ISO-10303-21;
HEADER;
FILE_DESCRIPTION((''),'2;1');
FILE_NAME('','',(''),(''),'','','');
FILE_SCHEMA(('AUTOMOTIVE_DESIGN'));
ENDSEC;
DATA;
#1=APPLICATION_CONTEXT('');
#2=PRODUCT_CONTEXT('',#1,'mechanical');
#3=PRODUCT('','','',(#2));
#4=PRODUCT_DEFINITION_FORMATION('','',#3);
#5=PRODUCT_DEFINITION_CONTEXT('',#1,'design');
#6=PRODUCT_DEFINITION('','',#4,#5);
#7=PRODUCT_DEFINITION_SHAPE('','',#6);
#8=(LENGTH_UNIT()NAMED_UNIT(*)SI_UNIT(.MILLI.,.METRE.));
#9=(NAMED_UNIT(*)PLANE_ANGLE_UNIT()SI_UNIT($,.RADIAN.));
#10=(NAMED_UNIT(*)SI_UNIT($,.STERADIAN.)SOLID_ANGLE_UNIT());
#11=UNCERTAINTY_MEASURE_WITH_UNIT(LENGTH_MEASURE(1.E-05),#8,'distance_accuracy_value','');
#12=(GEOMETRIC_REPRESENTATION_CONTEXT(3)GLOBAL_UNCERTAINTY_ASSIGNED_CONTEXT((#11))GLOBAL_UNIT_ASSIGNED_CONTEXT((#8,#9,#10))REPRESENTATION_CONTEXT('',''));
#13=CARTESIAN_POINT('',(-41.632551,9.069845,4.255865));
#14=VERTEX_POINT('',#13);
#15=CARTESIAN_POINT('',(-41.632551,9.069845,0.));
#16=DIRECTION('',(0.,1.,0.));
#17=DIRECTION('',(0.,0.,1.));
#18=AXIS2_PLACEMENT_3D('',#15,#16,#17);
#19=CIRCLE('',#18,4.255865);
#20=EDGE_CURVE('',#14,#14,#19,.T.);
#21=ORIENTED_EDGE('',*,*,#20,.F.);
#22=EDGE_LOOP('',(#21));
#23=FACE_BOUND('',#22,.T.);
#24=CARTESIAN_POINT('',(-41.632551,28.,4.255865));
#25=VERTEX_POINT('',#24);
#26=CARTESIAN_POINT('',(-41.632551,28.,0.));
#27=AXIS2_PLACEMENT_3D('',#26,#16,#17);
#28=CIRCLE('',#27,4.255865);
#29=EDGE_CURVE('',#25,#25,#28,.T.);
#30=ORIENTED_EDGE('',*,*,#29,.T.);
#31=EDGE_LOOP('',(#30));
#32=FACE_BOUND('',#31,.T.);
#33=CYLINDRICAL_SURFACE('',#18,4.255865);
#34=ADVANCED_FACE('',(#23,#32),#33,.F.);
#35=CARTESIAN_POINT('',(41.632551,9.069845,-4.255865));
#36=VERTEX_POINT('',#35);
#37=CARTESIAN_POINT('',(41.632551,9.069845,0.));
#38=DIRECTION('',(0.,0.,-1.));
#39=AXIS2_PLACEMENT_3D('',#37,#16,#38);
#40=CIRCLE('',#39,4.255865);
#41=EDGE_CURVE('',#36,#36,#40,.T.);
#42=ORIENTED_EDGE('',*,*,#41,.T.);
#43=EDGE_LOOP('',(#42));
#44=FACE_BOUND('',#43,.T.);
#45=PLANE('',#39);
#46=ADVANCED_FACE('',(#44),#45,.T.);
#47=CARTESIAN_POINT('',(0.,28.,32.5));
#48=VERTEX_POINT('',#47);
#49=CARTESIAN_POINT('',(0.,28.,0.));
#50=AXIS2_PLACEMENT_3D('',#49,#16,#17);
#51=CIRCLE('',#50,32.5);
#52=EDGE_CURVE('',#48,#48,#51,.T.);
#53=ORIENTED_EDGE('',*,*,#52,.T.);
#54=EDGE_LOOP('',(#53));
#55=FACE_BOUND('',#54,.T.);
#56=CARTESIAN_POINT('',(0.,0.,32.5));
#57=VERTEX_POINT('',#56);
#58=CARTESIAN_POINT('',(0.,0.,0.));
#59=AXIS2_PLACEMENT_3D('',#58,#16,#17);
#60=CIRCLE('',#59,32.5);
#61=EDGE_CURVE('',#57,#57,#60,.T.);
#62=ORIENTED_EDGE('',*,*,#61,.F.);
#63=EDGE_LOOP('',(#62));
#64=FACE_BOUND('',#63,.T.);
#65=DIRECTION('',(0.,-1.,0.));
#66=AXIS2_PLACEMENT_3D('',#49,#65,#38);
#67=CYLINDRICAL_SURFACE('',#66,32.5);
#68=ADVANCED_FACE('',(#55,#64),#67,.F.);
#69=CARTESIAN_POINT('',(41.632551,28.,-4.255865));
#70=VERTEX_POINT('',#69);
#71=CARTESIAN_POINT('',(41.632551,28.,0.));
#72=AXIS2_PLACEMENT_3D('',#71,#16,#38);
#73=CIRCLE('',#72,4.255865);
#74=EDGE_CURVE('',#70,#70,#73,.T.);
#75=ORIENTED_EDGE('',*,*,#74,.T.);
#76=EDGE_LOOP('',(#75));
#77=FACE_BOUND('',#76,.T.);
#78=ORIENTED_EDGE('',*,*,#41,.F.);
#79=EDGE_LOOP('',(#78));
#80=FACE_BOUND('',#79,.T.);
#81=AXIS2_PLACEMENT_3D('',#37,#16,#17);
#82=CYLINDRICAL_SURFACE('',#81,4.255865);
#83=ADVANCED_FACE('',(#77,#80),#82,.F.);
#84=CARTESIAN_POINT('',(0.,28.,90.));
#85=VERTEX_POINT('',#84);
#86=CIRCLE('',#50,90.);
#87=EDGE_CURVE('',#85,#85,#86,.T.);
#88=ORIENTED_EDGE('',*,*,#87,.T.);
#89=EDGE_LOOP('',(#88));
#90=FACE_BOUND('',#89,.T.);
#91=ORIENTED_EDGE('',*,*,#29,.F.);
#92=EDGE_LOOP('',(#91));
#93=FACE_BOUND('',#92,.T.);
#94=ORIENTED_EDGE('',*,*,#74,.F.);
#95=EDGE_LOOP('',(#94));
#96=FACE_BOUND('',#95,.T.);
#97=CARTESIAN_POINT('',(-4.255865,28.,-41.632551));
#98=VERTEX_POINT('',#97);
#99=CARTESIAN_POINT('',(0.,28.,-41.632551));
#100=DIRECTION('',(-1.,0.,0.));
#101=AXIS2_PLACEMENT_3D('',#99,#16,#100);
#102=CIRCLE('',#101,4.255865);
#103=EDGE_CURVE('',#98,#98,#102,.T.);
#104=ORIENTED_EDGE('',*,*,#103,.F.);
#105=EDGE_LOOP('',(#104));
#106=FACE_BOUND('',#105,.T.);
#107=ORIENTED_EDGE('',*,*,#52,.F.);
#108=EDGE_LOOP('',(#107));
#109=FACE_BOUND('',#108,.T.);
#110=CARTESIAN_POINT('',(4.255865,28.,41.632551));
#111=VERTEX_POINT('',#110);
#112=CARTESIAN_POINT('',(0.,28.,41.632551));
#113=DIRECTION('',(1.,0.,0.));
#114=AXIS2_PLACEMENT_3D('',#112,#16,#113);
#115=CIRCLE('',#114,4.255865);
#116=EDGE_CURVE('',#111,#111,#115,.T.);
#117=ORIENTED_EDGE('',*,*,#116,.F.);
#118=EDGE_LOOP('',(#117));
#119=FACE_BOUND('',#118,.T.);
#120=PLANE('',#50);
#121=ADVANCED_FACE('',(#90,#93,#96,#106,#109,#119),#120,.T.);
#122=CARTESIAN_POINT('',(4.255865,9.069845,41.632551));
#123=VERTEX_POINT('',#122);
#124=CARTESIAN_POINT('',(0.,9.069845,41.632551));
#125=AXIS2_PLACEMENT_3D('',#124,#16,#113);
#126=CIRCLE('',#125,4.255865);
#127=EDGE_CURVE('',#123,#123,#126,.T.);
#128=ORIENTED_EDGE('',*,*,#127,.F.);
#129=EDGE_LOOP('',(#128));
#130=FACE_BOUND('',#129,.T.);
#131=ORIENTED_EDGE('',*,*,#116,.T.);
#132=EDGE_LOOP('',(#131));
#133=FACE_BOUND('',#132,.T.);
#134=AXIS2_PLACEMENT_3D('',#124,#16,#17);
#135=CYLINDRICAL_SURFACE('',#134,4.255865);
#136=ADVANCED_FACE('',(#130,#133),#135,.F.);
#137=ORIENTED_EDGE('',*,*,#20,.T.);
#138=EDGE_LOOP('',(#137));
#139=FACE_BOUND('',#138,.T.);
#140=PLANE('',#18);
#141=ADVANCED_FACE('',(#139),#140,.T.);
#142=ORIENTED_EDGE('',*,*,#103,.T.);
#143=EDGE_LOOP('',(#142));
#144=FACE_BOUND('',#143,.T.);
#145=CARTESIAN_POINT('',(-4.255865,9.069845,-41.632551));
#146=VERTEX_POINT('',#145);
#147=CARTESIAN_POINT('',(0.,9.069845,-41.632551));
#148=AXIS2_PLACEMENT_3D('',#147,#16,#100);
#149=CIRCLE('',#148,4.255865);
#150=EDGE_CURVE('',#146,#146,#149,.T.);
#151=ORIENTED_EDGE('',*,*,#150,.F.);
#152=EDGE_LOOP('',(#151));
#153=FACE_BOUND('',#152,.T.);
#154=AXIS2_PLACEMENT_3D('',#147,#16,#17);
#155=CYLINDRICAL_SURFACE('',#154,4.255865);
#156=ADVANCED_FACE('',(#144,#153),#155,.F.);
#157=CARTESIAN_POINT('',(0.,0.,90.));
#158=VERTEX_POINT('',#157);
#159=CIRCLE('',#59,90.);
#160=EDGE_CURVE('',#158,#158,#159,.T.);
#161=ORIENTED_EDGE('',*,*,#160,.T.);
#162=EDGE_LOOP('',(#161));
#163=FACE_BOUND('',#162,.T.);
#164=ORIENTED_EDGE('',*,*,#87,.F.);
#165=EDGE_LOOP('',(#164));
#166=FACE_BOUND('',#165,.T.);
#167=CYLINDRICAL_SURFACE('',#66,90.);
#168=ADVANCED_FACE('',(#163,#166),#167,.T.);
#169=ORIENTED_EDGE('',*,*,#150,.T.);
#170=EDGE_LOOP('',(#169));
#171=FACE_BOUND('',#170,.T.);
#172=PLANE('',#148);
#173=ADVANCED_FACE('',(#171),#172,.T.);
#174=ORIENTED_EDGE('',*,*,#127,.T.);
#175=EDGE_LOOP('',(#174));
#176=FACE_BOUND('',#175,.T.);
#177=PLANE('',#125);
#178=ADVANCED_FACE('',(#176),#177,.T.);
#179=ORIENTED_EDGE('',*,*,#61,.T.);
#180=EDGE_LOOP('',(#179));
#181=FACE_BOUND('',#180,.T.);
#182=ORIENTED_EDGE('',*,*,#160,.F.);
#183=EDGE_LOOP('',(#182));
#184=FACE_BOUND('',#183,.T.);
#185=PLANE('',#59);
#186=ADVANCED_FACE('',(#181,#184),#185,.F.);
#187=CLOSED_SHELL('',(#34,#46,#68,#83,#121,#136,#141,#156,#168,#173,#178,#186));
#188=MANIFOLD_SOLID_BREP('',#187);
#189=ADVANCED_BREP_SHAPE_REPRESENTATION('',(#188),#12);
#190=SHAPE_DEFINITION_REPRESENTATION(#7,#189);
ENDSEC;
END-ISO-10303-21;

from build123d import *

# Parameters (mm, degrees)
SKETCH1_R           = 90
BOSS_EXTRUDE1_DEPTH = 28
SKETCH2_R           = 32.5
CUT_EXTRUDE1_DEPTH  = 131.322676461
SKETCH3_R           = 4.255865299
CUT_EXTRUDE2_DEPTH  = 18.930154696
CIRPATTERN1_COUNT   = 4


with BuildPart() as part:
    # Sketch1 → Boss-Extrude1 (new body)
    with BuildSketch(Plane(origin=(0, 0, 0), x_dir=(1, 0, 0), z_dir=(0, 1, 0))):
        Circle(SKETCH1_R)
    extrude(amount=BOSS_EXTRUDE1_DEPTH)

    # Sketch2 → Cut-Extrude1 (cut, through all)
    with BuildSketch(Plane(origin=(0, 0, 0), x_dir=(1, 0, 0), z_dir=(0, 1, 0))):
        Circle(SKETCH2_R)
    extrude(amount=CUT_EXTRUDE1_DEPTH, mode=Mode.SUBTRACT)

    # Sketch3 → Cut-Extrude2 (cut)
    with BuildSketch(Plane(origin=(0, 28, 0), x_dir=(1, 0, 0), z_dir=(0, 1, 0))):
        with Locations((-41.6325509, 0)):
            Circle(SKETCH3_R)
    cut_extrude2 = extrude(amount=-CUT_EXTRUDE2_DEPTH, mode=Mode.SUBTRACT)

    # CirPattern1: Cut-Extrude2 ×4 about axis
    cirpattern1_axis = Axis((0, 0, 0), (0, 1, 0))
    for i in range(1, CIRPATTERN1_COUNT):
        add(cut_extrude2.rotate(cirpattern1_axis, i * 360 / CIRPATTERN1_COUNT), mode=Mode.SUBTRACT)


solid = part.part
